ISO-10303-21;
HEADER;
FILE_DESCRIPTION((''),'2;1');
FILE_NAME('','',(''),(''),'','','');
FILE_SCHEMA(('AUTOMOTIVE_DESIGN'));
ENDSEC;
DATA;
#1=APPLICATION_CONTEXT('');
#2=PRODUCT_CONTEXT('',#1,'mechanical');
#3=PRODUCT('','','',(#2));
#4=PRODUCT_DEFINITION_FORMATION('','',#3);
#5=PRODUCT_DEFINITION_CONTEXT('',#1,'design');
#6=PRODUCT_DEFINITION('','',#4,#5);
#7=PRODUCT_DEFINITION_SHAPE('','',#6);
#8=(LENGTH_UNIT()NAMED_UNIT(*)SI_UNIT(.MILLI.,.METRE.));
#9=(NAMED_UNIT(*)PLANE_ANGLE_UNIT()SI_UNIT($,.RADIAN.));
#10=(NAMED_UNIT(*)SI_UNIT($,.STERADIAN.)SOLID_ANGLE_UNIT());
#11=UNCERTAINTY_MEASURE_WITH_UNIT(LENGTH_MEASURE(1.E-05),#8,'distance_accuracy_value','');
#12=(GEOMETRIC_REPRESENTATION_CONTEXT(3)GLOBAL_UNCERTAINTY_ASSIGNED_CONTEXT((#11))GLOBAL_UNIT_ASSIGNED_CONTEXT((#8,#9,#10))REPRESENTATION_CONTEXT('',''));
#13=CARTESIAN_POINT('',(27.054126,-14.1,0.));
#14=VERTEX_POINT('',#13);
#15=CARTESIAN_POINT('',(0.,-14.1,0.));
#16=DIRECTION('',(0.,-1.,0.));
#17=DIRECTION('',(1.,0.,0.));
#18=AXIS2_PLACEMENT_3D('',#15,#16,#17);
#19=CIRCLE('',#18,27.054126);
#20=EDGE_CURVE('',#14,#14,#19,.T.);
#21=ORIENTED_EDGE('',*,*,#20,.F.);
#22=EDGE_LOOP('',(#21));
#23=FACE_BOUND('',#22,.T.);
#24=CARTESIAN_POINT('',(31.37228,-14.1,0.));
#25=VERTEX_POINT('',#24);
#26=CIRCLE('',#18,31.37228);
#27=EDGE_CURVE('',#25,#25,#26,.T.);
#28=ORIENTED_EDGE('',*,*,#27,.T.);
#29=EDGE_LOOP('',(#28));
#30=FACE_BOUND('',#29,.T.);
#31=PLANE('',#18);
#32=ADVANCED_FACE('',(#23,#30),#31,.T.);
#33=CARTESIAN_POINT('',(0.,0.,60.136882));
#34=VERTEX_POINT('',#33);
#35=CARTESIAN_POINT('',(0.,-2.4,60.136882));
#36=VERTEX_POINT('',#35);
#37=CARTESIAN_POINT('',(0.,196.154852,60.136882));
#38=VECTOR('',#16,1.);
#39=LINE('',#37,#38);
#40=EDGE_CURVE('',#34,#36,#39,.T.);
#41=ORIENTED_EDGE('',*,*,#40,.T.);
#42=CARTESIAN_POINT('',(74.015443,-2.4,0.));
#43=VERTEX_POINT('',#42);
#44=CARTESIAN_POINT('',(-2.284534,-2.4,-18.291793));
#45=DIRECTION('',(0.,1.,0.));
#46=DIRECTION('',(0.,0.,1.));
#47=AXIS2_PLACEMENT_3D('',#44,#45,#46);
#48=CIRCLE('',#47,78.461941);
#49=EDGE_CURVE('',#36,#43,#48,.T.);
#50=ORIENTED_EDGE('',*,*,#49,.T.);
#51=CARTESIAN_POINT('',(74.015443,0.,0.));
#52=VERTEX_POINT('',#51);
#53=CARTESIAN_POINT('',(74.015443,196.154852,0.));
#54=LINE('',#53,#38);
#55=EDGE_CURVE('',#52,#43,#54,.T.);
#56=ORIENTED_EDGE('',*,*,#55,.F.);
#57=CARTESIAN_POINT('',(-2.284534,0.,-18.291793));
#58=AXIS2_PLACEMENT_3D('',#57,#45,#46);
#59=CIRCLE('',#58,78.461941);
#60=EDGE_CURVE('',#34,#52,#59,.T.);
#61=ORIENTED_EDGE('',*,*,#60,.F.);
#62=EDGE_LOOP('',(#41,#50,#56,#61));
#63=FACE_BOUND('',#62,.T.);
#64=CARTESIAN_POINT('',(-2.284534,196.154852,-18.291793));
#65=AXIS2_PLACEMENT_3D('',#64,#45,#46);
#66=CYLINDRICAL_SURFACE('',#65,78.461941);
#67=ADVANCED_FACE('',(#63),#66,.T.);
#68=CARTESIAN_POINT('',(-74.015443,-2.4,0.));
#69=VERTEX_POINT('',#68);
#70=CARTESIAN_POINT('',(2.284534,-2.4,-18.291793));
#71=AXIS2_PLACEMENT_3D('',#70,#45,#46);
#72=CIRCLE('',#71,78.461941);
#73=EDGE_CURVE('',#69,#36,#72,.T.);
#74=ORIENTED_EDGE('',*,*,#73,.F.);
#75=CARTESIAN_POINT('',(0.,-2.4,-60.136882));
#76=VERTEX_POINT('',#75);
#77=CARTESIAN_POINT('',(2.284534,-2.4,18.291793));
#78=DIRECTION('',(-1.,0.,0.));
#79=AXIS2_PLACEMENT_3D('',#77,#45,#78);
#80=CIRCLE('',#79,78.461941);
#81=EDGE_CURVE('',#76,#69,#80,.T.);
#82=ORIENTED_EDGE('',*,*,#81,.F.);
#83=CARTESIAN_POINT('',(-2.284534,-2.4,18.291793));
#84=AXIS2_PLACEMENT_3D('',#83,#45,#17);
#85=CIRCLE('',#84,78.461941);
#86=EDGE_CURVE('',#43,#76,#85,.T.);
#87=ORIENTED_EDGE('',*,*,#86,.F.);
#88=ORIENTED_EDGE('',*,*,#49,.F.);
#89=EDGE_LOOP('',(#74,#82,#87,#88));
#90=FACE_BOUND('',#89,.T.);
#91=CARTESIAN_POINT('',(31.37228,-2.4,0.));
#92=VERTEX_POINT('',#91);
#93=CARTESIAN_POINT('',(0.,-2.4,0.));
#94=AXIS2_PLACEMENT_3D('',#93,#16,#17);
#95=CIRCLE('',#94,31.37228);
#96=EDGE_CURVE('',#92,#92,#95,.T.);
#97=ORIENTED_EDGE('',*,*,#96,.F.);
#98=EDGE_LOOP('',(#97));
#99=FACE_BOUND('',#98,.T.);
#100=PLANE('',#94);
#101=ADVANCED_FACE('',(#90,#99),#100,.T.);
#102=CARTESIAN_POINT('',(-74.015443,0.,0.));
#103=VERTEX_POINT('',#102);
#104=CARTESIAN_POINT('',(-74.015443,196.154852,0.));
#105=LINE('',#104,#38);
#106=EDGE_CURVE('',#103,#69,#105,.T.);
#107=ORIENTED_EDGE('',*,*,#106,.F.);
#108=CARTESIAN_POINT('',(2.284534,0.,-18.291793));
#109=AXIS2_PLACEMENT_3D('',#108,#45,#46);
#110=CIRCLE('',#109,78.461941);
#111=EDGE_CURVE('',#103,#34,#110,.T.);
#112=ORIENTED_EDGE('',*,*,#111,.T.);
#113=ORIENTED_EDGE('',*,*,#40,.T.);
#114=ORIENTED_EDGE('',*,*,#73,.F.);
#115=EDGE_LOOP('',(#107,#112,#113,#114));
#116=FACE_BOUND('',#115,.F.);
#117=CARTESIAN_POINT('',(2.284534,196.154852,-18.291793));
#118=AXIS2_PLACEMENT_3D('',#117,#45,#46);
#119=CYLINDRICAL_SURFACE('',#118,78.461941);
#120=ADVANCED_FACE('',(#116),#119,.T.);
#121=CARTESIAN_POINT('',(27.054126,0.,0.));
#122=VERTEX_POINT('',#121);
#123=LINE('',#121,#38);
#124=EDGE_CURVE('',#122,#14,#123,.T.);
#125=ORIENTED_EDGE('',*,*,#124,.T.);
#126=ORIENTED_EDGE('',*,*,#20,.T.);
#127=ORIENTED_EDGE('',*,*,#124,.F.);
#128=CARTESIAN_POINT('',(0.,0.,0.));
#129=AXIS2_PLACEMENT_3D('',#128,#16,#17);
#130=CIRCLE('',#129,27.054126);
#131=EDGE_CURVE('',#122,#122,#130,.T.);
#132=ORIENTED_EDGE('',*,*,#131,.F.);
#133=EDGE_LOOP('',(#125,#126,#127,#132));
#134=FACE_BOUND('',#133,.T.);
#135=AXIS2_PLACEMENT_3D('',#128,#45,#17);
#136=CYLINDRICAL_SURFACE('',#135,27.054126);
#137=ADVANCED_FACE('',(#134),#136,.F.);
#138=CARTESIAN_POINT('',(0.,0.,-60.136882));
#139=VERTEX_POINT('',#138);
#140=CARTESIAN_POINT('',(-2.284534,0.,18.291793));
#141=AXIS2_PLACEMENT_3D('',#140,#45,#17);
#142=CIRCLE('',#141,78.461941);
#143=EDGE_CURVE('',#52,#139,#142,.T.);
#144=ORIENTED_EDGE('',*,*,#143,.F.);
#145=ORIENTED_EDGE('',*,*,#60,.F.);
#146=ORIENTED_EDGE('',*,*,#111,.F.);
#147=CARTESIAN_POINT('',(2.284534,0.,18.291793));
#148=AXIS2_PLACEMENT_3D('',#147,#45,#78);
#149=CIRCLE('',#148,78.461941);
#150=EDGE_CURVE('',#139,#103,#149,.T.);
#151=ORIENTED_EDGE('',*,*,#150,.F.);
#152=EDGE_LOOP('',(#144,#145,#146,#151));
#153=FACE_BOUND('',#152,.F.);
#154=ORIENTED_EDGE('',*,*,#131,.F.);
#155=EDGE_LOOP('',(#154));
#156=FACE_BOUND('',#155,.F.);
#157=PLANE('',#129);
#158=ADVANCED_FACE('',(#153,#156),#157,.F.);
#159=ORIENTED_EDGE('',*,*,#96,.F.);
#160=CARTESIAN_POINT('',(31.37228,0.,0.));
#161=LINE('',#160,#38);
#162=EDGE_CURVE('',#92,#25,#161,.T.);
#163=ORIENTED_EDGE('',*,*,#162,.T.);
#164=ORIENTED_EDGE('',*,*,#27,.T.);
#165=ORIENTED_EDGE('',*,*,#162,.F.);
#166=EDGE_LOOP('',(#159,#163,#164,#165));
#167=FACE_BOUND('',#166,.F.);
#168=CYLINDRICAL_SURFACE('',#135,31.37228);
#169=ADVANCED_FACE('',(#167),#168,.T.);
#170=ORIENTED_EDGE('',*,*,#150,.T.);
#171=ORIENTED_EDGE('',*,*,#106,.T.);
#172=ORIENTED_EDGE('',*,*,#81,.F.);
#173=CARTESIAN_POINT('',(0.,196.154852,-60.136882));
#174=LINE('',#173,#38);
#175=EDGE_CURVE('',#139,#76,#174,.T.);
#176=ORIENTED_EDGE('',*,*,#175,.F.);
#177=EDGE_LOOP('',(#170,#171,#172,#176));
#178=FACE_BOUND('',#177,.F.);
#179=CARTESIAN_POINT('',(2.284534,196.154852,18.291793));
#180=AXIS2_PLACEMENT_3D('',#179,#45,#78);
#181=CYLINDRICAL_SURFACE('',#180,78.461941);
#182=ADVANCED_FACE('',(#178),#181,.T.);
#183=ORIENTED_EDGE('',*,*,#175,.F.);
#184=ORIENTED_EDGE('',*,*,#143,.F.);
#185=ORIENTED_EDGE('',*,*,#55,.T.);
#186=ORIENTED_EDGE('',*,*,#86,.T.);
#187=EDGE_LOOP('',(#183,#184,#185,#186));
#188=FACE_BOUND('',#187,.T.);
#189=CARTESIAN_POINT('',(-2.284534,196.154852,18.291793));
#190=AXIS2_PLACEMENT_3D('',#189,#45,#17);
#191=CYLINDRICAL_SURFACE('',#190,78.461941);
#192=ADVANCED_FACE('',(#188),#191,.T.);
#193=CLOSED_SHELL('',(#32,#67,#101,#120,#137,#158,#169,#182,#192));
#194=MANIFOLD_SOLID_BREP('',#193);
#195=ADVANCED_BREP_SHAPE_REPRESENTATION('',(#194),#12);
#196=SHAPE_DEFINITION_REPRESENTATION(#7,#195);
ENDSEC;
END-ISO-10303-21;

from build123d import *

# Parameters (mm, degrees)
F0_R        = 31.3722800925
F1_DEPTH    = 2.4
F0_R_2      = 27.0541255518
F2_DEPTH    = 14.1
F3_T1_DEPTH = 394.7097038856


# Not quite as in the source:
# - a fillet or chamfer that OpenCascade refuses, or shapes differently, is made with other operations: its cross-section is extruded or revolved along the edge and cut away or added


with BuildPart() as f1:
    # F0 (on Front) → F1 (new body)
    with BuildSketch(Plane.XZ):
        Polygon((76.1774070561, 60.170147568), (-76.1774070561, 60.170147568), (-76.1774070561, 34.1583490372), (-76.1774070561, -34.1583490372), (-76.1774070561, -60.170147568), (76.1774070561, -60.170147568), (76.1774070561, -34.1583490372), (76.1774070561, 34.1583490372), align=None)
        Circle(F0_R, mode=Mode.SUBTRACT)
    extrude(amount=F1_DEPTH)

    # F0 (on Front) → F2 (join)
    with BuildSketch(Plane.XZ):
        Circle(F0_R)
        Circle(F0_R_2, mode=Mode.SUBTRACT)
    extrude(amount=F2_DEPTH)

    # F3: fillet of radius 78.4619407771 on 4 edges, made by hand

    # F3_s2 → F3_t1 (cut)
    with BuildSketch(Plane.XZ.offset(-196.1548519428)):
        with BuildLine():
            ThreePointArc((2.284533721, 60.170147568), (-53.1964366675, 37.1891771794), (-76.1774070561, -18.2917932091))
            Line((-76.1774070561, -18.2917932091), (-76.1774070561, 60.170147568))
            Line((-76.1774070561, 60.170147568), (2.284533721, 60.170147568))
        make_face()
        with BuildLine():
            ThreePointArc((-2.284533721, 60.170147568), (53.1964366675, 37.1891771794), (76.1774070561, -18.2917932091))
            Line((76.1774070561, -18.2917932091), (76.1774070561, 60.170147568))
            Line((76.1774070561, 60.170147568), (-2.284533721, 60.170147568))
        make_face()
        with BuildLine():
            ThreePointArc((76.1774070561, 18.2917932091), (53.1964366675, -37.1891771794), (-2.284533721, -60.170147568))
            Line((-2.284533721, -60.170147568), (76.1774070561, -60.170147568))
            Line((76.1774070561, -60.170147568), (76.1774070561, 18.2917932091))
        make_face()
        with BuildLine():
            ThreePointArc((-76.1774070561, 18.2917932091), (-53.1964366675, -37.1891771794), (2.284533721, -60.170147568))
            Line((2.284533721, -60.170147568), (-76.1774070561, -60.170147568))
            Line((-76.1774070561, -60.170147568), (-76.1774070561, 18.2917932091))
        make_face()
    extrude(amount=F3_T1_DEPTH, mode=Mode.SUBTRACT)


solid = f1.part
